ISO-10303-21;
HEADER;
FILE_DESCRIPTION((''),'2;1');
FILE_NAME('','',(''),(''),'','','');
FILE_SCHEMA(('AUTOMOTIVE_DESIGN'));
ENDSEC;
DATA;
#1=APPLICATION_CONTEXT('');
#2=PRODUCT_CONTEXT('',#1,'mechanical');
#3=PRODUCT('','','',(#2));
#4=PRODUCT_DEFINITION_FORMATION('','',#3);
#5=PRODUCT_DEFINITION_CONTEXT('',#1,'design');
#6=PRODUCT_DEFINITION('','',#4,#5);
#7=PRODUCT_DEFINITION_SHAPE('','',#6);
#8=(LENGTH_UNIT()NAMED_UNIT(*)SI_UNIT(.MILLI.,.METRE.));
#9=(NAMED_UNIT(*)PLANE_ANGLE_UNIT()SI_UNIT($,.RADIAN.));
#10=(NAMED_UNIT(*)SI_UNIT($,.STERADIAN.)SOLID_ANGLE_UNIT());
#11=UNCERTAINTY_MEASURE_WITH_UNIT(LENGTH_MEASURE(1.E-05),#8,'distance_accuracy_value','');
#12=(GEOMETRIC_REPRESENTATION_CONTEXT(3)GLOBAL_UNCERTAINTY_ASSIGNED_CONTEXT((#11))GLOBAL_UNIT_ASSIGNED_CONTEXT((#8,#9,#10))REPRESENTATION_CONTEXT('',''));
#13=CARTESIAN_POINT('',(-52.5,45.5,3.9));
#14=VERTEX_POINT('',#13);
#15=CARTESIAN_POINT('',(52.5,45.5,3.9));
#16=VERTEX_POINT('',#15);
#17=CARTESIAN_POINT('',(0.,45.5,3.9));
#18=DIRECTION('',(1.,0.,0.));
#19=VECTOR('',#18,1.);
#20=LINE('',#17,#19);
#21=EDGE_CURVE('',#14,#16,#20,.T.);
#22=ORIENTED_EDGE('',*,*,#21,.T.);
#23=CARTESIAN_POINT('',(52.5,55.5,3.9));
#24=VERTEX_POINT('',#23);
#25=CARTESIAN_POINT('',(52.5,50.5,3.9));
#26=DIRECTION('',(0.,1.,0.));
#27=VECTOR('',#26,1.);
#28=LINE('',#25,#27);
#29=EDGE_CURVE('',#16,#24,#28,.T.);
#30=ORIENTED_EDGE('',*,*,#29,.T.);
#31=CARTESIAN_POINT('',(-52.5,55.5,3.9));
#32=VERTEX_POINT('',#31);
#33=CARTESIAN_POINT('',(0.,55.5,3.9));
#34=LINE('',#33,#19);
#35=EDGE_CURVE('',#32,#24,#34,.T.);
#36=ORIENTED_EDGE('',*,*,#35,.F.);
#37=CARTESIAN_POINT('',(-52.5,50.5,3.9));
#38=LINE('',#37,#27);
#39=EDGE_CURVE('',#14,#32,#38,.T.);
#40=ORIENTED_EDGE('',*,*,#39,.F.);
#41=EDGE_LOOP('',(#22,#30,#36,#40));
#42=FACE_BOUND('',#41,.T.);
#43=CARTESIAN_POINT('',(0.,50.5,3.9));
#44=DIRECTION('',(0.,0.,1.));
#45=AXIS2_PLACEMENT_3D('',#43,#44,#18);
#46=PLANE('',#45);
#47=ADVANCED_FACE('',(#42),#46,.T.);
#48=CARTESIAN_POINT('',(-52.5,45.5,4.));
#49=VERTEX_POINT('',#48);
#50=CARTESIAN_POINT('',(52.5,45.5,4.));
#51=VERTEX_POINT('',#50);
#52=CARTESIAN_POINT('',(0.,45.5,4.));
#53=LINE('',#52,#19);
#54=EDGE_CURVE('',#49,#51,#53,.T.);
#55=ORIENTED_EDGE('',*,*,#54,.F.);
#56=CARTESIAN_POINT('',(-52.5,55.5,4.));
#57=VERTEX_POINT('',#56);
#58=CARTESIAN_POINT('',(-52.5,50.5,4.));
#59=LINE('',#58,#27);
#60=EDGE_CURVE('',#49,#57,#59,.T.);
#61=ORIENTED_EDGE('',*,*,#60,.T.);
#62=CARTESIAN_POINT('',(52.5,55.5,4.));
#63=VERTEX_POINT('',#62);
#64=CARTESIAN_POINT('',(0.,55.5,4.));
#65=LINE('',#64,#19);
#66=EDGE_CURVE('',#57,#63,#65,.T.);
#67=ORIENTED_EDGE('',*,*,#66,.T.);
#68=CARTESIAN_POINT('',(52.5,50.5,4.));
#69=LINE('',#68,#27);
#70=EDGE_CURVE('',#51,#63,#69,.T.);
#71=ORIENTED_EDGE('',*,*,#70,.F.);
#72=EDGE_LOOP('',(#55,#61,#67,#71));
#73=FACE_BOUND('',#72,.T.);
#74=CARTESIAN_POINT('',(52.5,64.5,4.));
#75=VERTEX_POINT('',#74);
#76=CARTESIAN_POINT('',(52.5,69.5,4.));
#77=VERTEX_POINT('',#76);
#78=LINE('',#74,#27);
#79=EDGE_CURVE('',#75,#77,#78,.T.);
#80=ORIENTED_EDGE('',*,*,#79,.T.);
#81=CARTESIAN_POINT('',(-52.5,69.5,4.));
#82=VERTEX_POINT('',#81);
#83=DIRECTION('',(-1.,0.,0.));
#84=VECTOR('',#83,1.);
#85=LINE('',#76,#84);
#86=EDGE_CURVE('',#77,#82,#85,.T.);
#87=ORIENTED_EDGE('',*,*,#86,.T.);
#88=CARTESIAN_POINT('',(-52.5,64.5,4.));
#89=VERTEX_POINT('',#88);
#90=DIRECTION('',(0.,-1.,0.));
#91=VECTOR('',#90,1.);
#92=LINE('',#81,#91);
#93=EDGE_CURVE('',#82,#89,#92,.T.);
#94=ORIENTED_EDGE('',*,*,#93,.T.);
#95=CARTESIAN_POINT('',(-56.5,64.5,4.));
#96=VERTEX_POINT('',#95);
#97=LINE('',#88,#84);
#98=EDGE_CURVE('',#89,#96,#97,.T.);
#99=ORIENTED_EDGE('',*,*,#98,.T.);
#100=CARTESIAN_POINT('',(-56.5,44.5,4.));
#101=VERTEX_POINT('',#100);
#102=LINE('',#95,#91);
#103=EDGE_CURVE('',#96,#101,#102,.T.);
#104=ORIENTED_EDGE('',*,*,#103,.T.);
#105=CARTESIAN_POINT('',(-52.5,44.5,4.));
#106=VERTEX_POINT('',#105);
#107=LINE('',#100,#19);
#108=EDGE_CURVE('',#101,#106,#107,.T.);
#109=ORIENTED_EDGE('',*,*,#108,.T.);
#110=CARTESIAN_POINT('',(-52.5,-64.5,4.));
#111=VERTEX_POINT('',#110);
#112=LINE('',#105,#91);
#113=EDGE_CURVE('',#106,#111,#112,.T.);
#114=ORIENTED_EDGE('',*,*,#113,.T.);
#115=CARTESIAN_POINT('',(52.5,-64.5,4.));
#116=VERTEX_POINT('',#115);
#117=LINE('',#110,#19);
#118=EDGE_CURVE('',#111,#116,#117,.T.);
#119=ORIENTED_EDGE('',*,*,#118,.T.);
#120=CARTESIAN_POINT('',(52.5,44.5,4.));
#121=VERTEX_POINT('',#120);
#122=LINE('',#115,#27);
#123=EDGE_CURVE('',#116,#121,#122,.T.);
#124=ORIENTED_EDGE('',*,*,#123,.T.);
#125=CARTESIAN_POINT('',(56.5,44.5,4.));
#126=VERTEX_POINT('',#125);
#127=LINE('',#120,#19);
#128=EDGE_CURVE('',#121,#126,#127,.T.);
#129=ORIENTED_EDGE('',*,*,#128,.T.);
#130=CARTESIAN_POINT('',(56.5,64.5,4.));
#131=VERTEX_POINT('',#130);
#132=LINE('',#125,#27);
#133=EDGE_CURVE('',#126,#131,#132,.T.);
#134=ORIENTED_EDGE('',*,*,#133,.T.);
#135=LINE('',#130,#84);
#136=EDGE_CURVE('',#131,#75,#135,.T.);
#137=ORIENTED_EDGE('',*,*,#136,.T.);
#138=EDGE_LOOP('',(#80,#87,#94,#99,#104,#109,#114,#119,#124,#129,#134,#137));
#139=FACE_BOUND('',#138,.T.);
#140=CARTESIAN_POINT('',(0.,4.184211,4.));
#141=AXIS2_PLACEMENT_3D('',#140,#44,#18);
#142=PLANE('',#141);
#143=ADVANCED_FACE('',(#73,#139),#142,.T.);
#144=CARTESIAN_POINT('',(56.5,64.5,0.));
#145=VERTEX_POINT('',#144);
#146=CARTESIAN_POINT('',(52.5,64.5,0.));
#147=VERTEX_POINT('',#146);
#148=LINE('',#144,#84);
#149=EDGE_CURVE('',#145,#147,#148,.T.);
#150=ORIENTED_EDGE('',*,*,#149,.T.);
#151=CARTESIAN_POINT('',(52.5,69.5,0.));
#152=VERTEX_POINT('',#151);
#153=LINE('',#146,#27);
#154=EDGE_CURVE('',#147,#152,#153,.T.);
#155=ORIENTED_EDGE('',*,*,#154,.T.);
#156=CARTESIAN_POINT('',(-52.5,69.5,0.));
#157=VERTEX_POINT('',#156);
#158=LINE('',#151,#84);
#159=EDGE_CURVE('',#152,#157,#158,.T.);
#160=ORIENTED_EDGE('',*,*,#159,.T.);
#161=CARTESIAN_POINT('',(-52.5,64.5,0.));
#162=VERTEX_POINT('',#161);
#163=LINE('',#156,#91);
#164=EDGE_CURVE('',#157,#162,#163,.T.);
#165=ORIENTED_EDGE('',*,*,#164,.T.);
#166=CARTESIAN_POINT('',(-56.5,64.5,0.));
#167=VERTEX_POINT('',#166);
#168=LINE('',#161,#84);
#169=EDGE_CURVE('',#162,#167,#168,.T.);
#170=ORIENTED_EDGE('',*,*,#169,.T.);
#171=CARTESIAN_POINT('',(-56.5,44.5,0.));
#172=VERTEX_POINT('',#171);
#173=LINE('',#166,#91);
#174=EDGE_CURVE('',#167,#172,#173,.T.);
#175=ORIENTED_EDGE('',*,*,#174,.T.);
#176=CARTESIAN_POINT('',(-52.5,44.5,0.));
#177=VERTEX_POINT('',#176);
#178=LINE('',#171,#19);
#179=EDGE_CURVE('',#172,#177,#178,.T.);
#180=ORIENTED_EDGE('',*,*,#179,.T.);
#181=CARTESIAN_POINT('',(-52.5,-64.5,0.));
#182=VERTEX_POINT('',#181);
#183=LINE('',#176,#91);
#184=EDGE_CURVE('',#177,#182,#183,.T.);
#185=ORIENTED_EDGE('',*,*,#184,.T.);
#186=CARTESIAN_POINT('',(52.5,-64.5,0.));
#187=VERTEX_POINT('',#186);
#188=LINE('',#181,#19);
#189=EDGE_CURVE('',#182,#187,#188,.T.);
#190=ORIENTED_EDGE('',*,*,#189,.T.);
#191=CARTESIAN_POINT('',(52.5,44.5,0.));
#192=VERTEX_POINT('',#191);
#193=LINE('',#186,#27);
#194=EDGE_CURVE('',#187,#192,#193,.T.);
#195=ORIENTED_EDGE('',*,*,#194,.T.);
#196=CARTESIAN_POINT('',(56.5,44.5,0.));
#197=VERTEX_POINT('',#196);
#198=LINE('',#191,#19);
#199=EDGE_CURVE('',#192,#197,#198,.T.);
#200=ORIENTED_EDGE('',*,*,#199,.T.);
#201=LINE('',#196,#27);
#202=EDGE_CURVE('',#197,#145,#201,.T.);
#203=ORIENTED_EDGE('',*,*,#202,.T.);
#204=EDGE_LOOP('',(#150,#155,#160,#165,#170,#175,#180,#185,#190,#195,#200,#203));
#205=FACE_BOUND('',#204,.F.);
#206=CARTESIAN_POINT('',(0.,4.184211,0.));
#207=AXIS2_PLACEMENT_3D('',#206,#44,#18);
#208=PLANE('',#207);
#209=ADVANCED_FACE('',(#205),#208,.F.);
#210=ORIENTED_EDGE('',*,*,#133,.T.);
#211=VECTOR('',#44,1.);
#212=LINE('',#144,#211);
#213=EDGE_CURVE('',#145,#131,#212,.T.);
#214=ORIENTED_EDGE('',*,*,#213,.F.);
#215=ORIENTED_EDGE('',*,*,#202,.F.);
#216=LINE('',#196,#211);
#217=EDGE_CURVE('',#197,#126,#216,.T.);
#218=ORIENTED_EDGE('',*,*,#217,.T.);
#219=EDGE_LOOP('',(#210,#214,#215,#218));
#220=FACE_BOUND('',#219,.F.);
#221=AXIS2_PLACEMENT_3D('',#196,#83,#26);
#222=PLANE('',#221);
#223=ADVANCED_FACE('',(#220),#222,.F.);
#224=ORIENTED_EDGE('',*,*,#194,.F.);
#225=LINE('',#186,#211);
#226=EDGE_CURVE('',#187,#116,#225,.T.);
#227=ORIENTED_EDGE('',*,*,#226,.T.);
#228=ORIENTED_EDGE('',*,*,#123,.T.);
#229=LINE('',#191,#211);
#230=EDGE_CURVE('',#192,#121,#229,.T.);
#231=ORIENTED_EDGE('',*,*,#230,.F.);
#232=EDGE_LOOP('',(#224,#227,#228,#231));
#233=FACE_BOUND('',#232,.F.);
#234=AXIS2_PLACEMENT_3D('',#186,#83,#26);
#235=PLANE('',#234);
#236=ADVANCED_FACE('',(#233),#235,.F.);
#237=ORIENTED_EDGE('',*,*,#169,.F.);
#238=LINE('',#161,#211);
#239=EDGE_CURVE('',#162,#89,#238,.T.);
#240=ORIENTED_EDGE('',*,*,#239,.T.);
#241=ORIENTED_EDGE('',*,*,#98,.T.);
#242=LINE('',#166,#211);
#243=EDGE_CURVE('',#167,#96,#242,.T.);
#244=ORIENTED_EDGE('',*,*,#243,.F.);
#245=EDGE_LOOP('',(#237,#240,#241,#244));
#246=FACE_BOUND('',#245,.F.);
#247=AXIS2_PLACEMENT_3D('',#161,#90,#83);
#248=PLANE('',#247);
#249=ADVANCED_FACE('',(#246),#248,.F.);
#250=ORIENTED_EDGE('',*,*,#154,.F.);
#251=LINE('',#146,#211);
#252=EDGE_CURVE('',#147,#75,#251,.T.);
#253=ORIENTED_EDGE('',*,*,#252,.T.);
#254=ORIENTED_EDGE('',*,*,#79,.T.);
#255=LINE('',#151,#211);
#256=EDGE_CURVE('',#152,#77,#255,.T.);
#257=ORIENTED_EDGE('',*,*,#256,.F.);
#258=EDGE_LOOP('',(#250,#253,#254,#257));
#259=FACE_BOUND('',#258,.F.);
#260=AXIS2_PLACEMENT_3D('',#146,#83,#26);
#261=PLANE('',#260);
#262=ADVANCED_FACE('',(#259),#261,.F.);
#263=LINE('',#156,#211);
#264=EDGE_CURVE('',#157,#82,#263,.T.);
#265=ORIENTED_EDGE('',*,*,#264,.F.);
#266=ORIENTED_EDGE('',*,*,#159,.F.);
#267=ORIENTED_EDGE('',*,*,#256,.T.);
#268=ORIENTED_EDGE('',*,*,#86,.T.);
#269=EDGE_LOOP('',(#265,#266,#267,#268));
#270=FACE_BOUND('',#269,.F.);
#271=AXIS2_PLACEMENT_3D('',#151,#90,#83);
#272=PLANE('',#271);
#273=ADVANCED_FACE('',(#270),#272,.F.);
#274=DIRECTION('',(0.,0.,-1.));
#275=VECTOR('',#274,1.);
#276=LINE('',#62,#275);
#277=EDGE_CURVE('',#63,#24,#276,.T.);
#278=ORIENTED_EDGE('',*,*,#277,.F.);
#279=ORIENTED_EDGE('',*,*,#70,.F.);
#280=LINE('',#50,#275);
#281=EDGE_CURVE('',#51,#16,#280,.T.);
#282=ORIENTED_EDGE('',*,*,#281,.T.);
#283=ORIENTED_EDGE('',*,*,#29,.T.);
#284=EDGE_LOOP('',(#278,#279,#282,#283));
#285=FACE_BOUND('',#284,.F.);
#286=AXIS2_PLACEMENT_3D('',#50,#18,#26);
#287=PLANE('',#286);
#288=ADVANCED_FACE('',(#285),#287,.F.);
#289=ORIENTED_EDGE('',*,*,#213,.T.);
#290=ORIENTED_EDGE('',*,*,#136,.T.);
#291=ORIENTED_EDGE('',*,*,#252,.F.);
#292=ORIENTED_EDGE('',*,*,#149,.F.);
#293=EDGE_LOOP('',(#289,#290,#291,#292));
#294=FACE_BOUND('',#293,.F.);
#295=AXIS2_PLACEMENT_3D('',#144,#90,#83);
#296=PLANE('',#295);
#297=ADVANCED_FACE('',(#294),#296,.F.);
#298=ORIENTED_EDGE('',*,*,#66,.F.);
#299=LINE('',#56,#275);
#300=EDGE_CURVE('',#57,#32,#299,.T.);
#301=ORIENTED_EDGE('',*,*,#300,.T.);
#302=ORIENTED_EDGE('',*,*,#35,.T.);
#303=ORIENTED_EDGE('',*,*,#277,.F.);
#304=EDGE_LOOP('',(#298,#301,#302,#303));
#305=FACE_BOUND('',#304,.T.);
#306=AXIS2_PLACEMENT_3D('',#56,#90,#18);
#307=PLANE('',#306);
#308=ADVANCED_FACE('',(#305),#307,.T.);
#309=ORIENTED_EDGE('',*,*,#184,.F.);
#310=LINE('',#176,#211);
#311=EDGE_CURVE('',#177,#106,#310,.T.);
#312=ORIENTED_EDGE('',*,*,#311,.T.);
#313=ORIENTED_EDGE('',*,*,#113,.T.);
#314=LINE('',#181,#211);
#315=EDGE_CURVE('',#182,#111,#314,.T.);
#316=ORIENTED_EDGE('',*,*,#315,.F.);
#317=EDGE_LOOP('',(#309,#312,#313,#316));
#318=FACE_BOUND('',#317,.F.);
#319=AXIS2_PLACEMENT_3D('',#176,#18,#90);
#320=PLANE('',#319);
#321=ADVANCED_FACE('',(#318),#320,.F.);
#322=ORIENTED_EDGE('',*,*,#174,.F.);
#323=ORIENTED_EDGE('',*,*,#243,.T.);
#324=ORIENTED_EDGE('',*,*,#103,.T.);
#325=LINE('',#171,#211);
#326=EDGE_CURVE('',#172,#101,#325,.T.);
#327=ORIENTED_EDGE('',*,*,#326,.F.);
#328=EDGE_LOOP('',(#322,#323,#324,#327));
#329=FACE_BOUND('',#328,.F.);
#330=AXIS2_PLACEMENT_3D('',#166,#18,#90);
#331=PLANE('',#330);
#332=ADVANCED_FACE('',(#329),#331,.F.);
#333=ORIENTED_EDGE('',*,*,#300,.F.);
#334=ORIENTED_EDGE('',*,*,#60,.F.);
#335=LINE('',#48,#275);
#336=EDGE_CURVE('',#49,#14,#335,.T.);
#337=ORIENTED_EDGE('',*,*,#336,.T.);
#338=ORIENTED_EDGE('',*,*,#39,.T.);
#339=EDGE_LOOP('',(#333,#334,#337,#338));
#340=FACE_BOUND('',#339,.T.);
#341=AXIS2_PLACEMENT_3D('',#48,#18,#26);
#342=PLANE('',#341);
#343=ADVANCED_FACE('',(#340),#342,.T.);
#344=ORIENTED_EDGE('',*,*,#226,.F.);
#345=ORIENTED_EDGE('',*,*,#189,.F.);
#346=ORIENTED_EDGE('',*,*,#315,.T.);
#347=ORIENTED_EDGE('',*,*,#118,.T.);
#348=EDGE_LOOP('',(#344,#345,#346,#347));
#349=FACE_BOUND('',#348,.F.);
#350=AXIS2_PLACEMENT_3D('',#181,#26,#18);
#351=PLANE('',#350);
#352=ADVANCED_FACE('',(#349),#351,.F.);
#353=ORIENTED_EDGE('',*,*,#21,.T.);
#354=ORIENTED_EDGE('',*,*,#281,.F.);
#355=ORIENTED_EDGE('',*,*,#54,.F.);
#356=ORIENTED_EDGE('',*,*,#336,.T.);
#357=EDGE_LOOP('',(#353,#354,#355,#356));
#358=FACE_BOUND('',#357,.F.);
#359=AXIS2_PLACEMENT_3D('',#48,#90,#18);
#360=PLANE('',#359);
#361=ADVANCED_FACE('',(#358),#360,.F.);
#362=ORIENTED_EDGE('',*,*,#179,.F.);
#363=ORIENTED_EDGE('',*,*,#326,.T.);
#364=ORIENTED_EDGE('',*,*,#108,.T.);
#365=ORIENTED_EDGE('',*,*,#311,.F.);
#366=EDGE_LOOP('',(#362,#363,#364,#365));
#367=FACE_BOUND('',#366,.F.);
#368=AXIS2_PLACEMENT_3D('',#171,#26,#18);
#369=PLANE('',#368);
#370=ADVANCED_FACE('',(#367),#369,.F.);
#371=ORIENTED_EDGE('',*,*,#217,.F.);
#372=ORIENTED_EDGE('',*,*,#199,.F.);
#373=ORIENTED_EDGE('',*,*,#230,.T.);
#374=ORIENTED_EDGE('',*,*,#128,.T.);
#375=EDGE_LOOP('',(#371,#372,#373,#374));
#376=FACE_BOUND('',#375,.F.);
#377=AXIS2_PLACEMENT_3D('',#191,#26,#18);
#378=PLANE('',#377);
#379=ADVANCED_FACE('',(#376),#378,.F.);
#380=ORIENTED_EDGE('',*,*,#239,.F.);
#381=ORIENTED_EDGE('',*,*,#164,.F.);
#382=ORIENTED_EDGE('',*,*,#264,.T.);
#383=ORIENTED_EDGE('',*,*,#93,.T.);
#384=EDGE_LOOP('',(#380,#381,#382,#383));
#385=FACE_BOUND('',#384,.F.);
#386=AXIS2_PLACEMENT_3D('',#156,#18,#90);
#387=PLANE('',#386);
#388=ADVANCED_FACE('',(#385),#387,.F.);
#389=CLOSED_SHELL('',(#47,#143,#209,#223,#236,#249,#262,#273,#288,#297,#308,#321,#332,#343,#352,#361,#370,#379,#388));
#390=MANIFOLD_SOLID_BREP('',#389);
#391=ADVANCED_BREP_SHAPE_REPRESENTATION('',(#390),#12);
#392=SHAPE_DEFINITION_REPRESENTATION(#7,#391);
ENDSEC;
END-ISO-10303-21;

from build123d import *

# Parameters (mm, degrees)
F1_DEPTH = 4
F2_W     = 105
F2_H     = 10
F3_DEPTH = 0.1


# Not quite as in the source:
# - a feature names something its author has since deleted; it is built from what else it names


with BuildPart() as f1:
    # F0 (on Top) → F1 (new body)
    with BuildSketch(Plane.XY):
        Polygon((-52.5, -64.5), (52.5, -64.5), (52.5, 44.5), (56.5, 44.5), (56.5, 64.5), (52.5, 64.5), (52.5, 69.5), (-52.5, 69.5), (-52.5, 64.5), (-56.5, 64.5), (-56.5, 44.5), (-52.5, 44.5), align=None)
    extrude(amount=F1_DEPTH)

    # F2 (on face) → F3 (cut)
    with BuildSketch(Plane.XY.offset(4)):
        with Locations((0, 50.5)):
            Rectangle(F2_W, F2_H)
    extrude(amount=-F3_DEPTH, mode=Mode.SUBTRACT)


solid = f1.part
